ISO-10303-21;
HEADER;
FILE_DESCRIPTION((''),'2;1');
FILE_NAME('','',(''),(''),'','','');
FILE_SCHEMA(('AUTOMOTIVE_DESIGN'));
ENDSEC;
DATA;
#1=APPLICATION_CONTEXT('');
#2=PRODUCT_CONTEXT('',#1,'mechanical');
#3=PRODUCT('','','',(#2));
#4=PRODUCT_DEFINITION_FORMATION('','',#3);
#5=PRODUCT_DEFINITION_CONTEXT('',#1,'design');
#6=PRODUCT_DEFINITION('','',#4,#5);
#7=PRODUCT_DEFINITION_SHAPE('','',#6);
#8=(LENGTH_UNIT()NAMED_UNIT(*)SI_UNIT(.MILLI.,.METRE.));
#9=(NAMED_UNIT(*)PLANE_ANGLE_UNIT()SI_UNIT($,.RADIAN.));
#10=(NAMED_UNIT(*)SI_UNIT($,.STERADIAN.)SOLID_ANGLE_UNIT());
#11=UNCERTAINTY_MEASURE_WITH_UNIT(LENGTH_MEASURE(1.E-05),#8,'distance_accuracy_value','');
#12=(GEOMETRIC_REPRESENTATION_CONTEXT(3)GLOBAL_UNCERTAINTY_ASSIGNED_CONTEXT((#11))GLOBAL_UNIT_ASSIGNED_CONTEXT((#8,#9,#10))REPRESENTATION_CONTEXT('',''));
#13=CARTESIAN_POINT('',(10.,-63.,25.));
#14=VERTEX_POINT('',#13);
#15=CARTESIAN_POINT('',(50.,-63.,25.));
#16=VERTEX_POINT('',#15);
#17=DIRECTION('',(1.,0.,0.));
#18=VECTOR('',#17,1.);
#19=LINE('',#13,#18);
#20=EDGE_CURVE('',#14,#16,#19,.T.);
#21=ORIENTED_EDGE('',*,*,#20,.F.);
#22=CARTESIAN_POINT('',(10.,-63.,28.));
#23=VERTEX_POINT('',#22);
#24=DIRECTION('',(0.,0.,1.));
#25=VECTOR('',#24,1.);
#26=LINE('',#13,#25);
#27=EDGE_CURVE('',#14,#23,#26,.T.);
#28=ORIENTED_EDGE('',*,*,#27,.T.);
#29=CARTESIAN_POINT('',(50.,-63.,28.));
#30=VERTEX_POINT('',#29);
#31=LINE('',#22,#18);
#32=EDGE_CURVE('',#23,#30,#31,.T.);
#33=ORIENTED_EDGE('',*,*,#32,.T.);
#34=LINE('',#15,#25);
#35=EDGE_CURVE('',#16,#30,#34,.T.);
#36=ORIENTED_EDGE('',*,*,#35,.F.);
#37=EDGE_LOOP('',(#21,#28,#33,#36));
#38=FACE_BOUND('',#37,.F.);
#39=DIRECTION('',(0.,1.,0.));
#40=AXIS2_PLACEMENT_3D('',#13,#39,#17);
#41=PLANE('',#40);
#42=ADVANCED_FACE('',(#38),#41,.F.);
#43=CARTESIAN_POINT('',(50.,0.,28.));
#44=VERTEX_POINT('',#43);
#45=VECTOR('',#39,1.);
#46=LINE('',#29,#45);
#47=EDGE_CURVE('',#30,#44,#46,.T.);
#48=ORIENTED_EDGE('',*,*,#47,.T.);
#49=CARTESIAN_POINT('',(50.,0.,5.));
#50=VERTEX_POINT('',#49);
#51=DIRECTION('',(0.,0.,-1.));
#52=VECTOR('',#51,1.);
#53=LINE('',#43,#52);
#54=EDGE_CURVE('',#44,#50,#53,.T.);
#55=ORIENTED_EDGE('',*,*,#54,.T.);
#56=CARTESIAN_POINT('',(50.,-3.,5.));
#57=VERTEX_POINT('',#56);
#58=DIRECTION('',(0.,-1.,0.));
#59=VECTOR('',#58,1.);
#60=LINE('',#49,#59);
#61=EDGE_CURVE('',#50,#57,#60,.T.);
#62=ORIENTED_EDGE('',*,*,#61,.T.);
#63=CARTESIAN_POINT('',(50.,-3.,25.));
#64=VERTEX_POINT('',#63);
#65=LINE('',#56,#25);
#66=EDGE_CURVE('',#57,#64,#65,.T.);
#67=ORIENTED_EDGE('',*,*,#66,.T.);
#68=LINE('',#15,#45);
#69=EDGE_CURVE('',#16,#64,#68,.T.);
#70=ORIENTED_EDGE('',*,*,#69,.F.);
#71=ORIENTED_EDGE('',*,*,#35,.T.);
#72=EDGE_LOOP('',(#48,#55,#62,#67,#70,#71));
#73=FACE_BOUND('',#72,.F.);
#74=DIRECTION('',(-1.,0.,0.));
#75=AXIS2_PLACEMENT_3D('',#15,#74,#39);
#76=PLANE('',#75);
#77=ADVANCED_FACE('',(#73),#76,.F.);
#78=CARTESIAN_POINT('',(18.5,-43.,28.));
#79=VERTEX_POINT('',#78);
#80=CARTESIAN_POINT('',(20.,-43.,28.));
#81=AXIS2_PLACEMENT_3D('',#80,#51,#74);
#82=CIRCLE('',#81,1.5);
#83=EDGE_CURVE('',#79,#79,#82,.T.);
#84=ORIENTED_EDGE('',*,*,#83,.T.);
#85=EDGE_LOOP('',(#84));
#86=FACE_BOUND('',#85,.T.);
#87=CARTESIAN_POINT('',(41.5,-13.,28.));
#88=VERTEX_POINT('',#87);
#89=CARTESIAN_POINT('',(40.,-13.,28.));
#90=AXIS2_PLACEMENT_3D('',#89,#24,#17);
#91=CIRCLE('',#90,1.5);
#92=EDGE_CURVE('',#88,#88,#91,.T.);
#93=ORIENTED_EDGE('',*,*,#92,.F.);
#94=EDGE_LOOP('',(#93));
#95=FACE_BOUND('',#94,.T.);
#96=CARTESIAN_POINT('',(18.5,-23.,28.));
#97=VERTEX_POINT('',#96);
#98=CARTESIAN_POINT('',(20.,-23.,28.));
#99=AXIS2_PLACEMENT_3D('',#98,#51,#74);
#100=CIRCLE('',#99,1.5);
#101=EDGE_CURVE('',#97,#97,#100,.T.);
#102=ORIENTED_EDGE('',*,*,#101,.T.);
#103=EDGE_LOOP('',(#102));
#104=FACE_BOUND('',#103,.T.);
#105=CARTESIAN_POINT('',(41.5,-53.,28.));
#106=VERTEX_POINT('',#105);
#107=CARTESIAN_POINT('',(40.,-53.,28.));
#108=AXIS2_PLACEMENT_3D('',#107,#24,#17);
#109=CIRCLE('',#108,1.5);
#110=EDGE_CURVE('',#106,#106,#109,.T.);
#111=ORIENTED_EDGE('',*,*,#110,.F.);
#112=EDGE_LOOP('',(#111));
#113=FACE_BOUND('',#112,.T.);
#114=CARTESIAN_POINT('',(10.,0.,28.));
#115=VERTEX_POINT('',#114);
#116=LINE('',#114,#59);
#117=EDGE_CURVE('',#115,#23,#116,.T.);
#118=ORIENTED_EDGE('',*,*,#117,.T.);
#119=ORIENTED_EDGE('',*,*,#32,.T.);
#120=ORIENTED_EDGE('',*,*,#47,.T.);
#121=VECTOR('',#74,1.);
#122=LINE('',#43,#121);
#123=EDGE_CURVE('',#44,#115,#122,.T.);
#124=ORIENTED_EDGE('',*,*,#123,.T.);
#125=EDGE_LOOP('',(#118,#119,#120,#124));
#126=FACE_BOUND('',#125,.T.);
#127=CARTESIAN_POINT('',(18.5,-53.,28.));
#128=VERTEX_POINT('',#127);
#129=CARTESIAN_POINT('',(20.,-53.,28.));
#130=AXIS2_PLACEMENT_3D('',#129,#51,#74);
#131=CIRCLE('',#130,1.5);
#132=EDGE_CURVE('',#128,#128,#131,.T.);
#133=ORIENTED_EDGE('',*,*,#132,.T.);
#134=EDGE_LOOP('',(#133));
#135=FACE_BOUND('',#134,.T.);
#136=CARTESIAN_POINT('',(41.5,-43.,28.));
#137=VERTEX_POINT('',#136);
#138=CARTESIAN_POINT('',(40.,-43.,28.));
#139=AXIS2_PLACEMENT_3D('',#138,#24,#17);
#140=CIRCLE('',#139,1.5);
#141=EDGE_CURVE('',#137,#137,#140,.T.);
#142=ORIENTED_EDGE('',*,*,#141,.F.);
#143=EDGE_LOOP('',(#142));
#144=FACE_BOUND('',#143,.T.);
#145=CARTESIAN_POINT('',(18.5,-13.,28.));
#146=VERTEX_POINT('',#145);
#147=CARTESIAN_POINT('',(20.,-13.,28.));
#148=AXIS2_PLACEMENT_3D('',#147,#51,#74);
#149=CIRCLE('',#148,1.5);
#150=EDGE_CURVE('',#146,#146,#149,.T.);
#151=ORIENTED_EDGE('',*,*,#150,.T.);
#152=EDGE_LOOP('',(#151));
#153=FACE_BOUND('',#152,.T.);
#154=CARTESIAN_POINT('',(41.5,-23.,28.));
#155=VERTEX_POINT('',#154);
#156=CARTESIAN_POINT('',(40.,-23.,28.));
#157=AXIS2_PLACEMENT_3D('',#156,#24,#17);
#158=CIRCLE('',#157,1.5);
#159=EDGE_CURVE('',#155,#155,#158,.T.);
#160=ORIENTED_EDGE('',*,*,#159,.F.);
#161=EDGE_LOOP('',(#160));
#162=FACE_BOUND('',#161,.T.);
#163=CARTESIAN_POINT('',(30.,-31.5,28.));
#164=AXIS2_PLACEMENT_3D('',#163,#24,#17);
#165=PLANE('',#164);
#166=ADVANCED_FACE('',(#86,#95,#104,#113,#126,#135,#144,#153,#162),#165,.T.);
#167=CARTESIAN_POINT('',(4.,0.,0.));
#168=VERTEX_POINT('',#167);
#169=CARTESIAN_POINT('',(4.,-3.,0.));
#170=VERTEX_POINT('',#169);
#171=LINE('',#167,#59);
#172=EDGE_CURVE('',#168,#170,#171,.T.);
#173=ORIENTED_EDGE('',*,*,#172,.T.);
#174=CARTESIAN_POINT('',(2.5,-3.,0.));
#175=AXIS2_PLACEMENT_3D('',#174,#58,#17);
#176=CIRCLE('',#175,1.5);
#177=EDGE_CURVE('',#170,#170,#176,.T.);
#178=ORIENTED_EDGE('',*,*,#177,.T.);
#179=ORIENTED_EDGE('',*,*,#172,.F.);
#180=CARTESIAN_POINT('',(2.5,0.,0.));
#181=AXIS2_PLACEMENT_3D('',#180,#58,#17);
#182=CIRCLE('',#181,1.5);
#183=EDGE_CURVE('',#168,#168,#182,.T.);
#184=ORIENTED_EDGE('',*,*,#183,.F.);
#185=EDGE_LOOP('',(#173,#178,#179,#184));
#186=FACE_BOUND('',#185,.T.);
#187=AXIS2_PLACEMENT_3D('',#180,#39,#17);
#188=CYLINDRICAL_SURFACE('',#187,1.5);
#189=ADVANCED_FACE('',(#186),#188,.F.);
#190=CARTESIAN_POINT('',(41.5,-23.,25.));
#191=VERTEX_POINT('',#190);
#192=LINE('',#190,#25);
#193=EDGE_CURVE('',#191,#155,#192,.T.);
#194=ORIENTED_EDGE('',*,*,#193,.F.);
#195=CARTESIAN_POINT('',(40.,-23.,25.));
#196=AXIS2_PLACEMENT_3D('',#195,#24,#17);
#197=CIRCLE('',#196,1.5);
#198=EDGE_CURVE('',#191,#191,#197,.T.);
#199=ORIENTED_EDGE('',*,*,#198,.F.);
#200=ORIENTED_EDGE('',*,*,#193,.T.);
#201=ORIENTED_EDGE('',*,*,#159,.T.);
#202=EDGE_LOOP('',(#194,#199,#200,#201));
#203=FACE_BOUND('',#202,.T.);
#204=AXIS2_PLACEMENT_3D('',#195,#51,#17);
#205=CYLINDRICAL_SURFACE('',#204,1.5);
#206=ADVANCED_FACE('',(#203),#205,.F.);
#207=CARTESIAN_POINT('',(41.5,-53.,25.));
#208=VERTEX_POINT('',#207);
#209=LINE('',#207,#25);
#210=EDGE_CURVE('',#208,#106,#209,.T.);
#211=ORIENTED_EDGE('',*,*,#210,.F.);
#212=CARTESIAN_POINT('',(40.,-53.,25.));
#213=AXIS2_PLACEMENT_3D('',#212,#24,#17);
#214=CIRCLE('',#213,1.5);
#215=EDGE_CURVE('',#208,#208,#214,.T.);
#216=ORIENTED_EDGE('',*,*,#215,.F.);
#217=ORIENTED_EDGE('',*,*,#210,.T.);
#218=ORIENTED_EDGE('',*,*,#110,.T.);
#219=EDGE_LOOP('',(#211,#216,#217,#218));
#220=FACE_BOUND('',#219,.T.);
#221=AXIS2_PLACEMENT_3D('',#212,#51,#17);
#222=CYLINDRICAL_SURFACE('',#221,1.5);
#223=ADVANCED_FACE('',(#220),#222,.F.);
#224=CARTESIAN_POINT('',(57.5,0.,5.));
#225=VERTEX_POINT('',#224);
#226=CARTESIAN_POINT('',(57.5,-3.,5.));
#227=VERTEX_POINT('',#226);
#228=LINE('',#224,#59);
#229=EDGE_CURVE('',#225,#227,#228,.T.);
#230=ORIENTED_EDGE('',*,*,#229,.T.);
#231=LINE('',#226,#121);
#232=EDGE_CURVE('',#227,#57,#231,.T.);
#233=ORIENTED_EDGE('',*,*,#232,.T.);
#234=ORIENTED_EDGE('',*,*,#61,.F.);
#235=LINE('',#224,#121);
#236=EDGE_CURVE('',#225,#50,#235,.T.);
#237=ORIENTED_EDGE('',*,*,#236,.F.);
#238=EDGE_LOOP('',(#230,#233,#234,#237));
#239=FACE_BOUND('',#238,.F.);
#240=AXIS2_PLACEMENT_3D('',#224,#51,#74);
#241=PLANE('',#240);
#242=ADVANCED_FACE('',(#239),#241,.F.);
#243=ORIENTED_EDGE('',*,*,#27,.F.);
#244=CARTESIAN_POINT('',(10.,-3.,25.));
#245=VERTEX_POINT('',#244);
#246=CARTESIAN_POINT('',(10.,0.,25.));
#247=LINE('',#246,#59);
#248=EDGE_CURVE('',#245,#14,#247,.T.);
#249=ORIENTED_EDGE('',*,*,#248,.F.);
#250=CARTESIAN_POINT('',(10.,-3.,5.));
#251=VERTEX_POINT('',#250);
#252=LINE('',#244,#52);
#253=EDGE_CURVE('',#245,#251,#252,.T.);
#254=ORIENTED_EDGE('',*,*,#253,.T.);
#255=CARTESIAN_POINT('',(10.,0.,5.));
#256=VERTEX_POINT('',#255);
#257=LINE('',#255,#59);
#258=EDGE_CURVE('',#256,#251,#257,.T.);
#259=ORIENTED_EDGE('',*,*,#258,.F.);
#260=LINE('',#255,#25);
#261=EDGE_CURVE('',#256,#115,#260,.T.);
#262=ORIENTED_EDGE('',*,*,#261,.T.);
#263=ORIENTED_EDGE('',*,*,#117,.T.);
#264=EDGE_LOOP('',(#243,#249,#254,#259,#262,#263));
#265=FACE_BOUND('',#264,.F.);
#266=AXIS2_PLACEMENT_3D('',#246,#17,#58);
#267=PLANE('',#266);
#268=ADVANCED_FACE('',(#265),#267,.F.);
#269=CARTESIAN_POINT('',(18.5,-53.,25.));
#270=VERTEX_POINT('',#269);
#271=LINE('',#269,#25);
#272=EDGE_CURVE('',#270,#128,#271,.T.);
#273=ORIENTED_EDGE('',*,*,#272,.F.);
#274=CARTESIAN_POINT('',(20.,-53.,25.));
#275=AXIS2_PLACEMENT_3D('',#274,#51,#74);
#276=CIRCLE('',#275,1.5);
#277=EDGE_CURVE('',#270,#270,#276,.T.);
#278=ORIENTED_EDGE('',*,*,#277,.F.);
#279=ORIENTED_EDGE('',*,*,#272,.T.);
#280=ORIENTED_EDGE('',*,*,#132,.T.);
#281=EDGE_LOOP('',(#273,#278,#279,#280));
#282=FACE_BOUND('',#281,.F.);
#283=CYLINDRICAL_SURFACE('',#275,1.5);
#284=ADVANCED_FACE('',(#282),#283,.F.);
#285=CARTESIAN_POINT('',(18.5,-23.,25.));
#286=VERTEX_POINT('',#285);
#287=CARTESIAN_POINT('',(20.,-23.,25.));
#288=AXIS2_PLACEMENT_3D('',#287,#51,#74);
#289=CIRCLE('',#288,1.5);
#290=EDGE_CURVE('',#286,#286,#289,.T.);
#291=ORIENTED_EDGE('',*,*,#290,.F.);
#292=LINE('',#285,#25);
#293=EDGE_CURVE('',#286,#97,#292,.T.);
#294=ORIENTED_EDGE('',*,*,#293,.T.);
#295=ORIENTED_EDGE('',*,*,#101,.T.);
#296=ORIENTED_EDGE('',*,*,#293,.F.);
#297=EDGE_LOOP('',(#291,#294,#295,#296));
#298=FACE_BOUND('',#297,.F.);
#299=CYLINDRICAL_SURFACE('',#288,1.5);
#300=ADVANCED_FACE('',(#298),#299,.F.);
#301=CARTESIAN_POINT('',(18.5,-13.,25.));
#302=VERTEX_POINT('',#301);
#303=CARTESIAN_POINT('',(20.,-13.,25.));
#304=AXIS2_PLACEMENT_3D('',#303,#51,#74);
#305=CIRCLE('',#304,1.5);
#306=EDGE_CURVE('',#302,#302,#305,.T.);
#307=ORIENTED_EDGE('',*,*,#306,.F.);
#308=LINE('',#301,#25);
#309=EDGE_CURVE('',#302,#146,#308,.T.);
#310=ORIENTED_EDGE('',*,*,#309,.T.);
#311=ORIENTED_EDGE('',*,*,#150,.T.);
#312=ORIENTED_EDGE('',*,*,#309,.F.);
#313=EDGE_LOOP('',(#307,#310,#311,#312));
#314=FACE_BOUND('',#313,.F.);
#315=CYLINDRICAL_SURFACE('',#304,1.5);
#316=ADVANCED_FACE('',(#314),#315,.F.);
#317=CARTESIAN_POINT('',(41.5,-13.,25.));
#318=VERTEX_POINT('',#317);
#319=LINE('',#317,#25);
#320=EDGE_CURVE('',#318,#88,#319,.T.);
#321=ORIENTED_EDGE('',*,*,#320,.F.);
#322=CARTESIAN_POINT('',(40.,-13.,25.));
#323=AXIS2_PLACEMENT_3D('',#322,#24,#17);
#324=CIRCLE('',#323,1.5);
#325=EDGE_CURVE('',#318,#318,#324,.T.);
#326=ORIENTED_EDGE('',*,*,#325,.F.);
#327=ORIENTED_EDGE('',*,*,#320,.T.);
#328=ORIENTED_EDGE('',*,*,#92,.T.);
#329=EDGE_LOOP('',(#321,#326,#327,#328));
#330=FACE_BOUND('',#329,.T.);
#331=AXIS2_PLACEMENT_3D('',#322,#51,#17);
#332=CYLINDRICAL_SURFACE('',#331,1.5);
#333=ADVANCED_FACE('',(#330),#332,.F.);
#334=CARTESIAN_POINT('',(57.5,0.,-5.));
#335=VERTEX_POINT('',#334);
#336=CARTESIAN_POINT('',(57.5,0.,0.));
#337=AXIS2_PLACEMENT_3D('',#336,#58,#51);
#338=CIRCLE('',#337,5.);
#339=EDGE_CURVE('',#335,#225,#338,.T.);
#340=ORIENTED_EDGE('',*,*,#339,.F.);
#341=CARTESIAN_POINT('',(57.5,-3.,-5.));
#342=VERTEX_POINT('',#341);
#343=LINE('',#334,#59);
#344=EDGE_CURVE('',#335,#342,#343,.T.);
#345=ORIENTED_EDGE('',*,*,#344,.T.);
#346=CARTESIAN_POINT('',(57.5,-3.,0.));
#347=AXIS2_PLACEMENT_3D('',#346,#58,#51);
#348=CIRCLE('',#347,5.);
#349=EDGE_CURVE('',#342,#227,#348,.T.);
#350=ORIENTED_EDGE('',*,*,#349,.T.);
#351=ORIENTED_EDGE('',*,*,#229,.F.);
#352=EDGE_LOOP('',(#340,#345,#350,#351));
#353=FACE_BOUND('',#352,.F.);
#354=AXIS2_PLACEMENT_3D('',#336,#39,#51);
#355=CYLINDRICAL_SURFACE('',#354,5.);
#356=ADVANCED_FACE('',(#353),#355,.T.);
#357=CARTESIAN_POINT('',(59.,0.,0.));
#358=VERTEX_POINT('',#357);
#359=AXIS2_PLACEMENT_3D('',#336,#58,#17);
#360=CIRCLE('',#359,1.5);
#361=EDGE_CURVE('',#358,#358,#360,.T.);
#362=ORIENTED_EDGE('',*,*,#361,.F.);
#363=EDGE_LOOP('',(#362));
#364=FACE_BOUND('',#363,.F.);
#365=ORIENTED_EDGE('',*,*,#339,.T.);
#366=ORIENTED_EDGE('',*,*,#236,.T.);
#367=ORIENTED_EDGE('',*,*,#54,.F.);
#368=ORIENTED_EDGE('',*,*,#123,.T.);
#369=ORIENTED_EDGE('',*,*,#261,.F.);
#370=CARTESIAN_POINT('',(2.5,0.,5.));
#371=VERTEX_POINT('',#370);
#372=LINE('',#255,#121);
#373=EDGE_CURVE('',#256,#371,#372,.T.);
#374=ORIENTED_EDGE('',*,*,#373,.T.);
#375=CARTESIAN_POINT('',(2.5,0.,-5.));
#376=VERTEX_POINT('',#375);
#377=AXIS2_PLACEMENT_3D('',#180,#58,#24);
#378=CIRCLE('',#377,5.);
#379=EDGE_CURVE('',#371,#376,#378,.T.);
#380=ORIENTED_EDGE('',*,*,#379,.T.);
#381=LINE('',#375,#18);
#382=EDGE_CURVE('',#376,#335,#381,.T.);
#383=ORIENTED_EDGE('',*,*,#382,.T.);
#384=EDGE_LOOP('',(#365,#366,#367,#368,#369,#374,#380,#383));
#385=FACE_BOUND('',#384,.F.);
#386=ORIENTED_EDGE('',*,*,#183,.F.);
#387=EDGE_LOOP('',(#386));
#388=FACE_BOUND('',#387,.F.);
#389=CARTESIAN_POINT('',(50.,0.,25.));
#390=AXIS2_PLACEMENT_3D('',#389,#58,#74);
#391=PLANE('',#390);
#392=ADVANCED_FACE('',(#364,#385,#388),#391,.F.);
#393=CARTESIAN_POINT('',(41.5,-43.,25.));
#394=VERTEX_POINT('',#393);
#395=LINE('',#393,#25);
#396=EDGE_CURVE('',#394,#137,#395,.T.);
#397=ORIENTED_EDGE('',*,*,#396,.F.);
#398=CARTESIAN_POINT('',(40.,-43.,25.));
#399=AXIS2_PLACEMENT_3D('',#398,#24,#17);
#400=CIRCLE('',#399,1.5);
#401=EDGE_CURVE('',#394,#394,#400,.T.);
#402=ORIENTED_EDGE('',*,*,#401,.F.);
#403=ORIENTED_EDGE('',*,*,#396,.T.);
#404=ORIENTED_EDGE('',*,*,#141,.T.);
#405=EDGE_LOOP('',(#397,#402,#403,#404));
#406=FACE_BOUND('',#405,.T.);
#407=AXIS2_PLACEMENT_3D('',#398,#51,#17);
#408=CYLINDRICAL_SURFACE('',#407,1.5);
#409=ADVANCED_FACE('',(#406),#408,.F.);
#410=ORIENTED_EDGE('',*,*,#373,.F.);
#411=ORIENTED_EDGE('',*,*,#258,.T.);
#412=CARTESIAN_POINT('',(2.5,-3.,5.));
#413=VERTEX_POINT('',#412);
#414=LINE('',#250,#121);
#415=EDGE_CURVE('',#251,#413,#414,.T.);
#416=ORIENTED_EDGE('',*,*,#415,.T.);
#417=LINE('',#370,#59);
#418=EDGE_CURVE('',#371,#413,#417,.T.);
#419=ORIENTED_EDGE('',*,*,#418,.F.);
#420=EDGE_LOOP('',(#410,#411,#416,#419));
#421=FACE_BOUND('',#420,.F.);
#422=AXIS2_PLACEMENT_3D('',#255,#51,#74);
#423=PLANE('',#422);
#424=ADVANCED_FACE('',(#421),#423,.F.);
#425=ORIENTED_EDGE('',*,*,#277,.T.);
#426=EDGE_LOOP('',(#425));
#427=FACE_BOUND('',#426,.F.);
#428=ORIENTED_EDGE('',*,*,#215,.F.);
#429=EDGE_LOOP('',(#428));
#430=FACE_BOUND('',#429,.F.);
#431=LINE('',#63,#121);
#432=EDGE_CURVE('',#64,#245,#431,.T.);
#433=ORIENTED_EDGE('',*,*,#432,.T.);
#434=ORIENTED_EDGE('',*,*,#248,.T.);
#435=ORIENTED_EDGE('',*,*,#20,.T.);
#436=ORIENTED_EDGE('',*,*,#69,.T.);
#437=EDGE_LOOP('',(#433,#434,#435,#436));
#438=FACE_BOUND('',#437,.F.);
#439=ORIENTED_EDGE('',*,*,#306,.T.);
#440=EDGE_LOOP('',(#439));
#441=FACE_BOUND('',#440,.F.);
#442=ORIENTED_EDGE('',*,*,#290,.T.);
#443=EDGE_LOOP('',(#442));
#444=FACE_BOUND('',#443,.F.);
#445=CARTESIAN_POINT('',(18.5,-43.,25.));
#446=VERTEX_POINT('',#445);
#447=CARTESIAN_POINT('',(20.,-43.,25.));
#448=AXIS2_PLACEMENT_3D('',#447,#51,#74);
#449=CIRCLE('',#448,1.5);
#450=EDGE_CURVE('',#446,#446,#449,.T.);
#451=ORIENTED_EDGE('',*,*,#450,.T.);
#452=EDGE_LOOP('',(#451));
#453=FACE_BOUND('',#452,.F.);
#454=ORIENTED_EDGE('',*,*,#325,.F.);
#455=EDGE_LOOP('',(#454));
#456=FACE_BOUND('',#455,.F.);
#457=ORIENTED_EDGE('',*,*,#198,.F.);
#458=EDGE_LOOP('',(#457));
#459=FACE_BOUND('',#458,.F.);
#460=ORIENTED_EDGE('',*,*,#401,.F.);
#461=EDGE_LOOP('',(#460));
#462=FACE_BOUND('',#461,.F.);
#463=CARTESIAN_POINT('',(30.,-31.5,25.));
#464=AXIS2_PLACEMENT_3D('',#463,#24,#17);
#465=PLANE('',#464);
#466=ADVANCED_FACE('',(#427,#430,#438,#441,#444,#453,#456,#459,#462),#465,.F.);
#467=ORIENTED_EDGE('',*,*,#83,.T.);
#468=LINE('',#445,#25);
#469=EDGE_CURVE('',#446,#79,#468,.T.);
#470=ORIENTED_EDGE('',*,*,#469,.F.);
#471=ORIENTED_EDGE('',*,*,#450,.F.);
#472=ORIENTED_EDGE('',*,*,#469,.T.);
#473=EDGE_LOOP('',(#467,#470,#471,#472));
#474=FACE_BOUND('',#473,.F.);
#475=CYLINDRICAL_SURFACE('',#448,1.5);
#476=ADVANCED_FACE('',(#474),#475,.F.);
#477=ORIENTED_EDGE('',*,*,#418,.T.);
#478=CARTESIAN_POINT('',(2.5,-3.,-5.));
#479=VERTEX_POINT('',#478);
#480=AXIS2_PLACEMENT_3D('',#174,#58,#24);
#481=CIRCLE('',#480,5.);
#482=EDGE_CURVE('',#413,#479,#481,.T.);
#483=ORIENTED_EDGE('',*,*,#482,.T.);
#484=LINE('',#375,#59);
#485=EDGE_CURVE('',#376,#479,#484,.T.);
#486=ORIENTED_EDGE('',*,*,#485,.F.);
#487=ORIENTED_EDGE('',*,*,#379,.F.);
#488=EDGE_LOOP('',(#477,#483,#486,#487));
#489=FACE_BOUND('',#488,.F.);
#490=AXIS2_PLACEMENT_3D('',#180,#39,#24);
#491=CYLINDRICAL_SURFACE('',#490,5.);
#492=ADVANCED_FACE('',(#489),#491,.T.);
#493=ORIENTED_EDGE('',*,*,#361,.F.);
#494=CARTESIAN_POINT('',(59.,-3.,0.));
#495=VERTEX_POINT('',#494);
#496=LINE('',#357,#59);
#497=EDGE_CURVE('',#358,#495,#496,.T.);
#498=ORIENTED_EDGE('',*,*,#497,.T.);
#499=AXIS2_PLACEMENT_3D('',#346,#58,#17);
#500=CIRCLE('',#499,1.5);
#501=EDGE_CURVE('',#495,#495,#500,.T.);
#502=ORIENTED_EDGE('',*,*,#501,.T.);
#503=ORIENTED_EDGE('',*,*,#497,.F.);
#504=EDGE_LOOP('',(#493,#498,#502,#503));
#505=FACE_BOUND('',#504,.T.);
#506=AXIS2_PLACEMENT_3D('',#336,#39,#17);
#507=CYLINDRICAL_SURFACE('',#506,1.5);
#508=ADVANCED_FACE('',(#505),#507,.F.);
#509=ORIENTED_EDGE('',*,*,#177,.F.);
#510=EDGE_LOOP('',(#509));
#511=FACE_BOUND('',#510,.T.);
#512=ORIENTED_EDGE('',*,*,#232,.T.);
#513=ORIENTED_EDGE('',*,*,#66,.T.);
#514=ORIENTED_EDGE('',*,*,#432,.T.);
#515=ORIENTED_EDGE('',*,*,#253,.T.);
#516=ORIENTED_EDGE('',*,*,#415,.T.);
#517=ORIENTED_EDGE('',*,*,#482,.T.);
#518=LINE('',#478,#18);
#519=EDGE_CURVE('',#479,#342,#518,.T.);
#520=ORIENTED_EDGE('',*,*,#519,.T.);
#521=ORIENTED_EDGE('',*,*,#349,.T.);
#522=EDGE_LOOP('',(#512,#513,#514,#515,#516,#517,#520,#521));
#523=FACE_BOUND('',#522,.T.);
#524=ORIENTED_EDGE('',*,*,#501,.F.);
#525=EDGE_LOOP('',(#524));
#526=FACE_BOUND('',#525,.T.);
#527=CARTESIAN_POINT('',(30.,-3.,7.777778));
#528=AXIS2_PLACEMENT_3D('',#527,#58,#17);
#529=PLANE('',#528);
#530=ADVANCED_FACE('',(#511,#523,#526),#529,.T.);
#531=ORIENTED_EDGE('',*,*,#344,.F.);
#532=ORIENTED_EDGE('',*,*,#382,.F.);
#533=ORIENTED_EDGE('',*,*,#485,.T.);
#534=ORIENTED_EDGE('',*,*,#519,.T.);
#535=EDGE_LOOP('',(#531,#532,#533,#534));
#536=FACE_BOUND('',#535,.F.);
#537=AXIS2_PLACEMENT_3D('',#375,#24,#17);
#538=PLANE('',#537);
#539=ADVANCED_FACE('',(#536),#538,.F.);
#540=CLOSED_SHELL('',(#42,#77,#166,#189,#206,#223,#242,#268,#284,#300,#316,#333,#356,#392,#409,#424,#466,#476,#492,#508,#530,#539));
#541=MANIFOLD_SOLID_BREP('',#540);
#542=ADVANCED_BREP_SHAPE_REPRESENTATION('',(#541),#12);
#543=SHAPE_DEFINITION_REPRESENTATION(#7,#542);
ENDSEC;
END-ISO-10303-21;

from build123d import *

# Parameters (mm, degrees)
F0_R     = 1.5
F1_DEPTH = 3
F2_R     = 1.5
F3_DEPTH = 3


# Not quite as in the source:
# - a feature names something its author has since deleted; it is built from what else it names


with BuildPart() as f1:
    # F0 (on Front) → F1 (new body)
    with BuildSketch(Plane.XZ):
        with BuildLine():
            Line((57.5, 5), (50, 5))
            Line((50, 5), (50, 25))
            Line((50, 25), (10, 25))
            Line((10, 25), (10, 5))
            Line((10, 5), (2.5, 5))
            ThreePointArc((2.5, 5), (-2.5, 0), (2.5, -5))
            Line((2.5, -5), (57.5, -5))
            ThreePointArc((57.5, -5), (62.5, 0), (57.5, 5))
        make_face()
        with Locations((2.5, 0)):
            Circle(F0_R, mode=Mode.SUBTRACT)
        with Locations((57.5, 0)):
            Circle(F0_R, mode=Mode.SUBTRACT)
    extrude(amount=F1_DEPTH)

    # F2 (on face) → F3 (join)
    with BuildSketch(Plane.XY.offset(25)):
        Polygon((50, 0), (10, 0), (10, -3), (10, -13), (10, -23), (10, -33), (10, -43), (10, -53), (10, -63), (50, -63), (50, -53), (50, -43), (50, -33), (50, -23), (50, -13), (50, -3), align=None)
        with BuildLine():
            ThreePointArc((21.5, -53), (20, -54.5), (18.5, -53))
            ThreePointArc((18.5, -53), (20, -51.5), (21.5, -53))
        make_face(mode=Mode.SUBTRACT)
        with BuildLine():
            ThreePointArc((21.5, -43), (20, -44.5), (18.5, -43))
            ThreePointArc((18.5, -43), (20, -41.5), (21.5, -43))
        make_face(mode=Mode.SUBTRACT)
        with Locations((40, -53)):
            Circle(F2_R, mode=Mode.SUBTRACT)
        with Locations((40, -43)):
            Circle(F2_R, mode=Mode.SUBTRACT)
        with BuildLine():
            ThreePointArc((21.5, -23), (20, -24.5), (18.5, -23))
            ThreePointArc((18.5, -23), (20, -21.5), (21.5, -23))
        make_face(mode=Mode.SUBTRACT)
        with BuildLine():
            ThreePointArc((21.5, -13), (20, -14.5), (18.5, -13))
            ThreePointArc((18.5, -13), (20, -11.5), (21.5, -13))
        make_face(mode=Mode.SUBTRACT)
        with Locations((40, -23)):
            Circle(F2_R, mode=Mode.SUBTRACT)
        with Locations((40, -13)):
            Circle(F2_R, mode=Mode.SUBTRACT)
    extrude(amount=F3_DEPTH)


solid = f1.part
